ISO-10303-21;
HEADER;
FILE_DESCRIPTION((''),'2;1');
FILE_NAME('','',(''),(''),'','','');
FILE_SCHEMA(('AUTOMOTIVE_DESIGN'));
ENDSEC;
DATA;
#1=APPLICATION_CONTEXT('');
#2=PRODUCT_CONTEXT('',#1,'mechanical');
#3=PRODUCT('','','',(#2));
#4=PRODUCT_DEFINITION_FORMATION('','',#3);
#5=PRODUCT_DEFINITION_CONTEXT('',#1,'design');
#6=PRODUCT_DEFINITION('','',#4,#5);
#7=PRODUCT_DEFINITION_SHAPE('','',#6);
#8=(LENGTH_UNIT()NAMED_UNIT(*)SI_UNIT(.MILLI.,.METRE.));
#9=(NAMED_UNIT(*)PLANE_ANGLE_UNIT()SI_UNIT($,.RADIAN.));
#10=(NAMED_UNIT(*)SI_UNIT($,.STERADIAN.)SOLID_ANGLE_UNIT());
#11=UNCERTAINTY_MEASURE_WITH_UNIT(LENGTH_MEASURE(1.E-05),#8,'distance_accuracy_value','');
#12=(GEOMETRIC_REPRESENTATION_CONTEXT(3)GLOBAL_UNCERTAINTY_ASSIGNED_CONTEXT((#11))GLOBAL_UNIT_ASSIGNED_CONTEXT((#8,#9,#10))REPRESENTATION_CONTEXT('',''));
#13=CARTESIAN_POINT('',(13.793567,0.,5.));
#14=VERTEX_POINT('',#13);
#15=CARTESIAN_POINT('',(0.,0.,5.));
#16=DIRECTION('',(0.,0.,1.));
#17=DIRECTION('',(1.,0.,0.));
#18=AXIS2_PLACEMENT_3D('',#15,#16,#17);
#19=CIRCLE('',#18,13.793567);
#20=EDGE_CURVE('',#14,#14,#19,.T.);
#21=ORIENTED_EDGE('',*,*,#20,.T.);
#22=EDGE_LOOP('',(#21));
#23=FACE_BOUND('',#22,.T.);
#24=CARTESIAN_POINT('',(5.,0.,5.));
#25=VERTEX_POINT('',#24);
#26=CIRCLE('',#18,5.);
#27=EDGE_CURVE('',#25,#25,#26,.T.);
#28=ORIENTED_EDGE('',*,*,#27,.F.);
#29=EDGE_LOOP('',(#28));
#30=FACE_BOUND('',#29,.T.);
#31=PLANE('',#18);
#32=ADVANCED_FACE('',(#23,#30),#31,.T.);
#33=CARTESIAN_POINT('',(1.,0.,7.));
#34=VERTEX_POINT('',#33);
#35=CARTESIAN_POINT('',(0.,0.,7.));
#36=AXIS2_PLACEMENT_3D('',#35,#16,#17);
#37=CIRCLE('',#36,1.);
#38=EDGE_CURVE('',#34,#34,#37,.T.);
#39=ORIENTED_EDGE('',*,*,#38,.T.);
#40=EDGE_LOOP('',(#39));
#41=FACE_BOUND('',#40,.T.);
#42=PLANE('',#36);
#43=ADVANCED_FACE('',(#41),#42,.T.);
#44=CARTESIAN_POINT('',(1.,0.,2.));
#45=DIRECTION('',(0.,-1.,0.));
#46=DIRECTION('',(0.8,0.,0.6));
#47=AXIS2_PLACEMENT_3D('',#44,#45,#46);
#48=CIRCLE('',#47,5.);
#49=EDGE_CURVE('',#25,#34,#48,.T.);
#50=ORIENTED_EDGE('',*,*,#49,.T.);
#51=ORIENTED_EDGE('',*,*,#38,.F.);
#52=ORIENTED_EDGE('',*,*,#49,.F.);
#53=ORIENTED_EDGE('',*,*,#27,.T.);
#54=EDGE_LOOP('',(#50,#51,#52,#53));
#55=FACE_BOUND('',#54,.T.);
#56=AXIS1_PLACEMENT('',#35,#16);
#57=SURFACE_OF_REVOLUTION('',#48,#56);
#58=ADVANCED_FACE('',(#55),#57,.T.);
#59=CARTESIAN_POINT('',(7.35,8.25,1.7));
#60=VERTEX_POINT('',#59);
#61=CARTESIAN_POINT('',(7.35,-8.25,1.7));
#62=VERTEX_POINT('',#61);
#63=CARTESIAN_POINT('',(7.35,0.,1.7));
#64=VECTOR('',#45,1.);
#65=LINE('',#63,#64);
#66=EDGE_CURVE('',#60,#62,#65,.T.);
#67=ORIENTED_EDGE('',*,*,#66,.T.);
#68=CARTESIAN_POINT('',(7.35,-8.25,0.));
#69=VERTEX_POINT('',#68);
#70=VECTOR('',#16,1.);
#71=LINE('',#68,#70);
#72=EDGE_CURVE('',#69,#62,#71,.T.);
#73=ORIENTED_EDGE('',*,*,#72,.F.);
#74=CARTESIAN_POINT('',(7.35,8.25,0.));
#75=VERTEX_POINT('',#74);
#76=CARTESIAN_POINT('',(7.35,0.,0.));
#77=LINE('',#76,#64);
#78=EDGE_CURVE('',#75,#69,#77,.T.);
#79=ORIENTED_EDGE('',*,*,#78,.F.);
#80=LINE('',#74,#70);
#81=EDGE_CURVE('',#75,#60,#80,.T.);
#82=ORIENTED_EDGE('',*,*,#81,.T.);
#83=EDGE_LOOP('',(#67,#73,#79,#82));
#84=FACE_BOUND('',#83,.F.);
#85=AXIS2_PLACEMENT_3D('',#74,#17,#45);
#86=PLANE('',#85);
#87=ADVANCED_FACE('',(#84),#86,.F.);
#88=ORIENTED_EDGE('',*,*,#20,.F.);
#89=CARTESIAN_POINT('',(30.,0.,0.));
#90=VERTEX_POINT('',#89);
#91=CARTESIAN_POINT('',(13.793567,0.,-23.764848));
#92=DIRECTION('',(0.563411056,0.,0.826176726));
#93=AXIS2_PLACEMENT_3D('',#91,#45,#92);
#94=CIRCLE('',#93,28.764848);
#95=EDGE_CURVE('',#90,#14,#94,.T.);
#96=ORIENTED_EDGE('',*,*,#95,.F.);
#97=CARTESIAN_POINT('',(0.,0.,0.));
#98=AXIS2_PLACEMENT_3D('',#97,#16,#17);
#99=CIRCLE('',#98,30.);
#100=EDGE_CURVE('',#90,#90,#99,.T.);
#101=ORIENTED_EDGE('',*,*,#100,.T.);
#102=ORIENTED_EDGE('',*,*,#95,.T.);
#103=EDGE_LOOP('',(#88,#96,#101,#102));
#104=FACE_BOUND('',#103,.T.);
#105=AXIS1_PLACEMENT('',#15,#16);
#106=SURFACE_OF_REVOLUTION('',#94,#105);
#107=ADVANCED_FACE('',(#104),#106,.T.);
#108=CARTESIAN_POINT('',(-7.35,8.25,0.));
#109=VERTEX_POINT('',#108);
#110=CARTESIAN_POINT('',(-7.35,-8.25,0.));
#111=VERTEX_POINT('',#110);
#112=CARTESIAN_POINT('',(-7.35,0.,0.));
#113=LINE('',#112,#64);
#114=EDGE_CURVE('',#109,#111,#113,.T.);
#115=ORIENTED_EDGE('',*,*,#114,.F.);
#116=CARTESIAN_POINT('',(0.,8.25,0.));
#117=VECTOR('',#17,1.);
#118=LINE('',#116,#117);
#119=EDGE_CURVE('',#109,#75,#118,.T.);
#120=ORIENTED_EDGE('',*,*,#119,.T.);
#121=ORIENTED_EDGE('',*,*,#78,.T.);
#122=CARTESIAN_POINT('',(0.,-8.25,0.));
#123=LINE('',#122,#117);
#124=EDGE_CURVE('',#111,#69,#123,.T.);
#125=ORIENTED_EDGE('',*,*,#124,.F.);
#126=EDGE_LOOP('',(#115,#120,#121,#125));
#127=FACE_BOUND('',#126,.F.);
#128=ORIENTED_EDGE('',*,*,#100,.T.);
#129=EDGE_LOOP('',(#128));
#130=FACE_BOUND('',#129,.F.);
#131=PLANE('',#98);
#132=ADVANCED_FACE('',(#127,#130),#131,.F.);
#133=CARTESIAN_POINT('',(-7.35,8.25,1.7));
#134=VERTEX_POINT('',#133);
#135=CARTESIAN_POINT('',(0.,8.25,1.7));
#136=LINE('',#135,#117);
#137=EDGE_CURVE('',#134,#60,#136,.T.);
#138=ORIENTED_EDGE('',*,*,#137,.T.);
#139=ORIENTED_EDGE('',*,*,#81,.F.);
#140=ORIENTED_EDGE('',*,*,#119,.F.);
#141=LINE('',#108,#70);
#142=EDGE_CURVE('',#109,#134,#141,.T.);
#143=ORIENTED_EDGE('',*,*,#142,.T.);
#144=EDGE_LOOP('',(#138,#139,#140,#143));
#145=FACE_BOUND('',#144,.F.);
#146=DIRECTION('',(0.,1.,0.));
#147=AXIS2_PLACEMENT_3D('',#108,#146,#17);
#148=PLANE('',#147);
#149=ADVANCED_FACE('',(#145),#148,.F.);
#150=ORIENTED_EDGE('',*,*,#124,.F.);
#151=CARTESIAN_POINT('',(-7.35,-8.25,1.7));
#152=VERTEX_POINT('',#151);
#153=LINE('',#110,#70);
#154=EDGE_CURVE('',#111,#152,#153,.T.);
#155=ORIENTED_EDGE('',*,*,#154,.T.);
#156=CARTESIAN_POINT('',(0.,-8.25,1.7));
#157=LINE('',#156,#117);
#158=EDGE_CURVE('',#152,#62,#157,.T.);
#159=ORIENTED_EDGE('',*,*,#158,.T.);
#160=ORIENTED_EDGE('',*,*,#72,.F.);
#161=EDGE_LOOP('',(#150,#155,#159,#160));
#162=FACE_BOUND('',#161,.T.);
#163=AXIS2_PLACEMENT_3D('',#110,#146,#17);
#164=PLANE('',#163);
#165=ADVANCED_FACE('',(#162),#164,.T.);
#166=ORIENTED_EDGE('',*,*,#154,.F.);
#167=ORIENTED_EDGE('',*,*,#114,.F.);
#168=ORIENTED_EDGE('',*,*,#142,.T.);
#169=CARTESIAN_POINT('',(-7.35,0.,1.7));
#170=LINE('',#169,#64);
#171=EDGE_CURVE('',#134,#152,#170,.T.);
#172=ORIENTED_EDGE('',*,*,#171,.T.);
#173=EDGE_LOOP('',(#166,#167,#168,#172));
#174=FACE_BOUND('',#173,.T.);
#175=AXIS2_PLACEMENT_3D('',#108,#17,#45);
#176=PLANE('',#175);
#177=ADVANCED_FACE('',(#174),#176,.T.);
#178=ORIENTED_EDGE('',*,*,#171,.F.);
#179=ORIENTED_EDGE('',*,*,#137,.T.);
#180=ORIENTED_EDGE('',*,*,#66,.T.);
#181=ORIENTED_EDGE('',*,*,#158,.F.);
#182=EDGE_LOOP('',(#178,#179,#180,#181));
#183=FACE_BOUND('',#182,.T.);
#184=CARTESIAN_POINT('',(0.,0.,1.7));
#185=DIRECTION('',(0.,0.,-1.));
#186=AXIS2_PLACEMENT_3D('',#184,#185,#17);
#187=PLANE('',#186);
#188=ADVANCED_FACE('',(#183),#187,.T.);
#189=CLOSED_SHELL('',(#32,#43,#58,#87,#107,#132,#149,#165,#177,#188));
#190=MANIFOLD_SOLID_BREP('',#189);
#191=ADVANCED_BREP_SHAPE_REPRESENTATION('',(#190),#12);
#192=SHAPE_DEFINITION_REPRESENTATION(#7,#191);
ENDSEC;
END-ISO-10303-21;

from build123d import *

# Parameters (mm, degrees)
F0_R     = 30
F1_DEPTH = 5
F3_R     = 5
F4_DEPTH = 2
F5_W     = 14.7
F5_H     = 16.5
F6_DEPTH = 1.7


# Not quite as in the source:
# - a fillet or chamfer that OpenCascade refuses, or shapes differently, is made with other operations: its cross-section is extruded or revolved along the edge and cut away or added


with BuildPart() as f1:
    # F0 (on Top) → F1 (new body)
    with BuildSketch(Plane.XY):
        Circle(F0_R)
    extrude(amount=F1_DEPTH)

    # F2: fillet of radius 28.7648476108 on 1 edges, made by hand

    # F2_s1 → F2_t2 (revolve, cut)
    with BuildSketch(Plane.XZ):
        with BuildLine():
            ThreePointArc((30, 0), (22.2736681867, 3.7215915737), (13.7935668295, 5))
            Line((13.7935668295, 5), (30, 5))
            Line((30, 5), (30, 0))
        make_face()
    revolve(axis=Axis((0, 0, 5), (0, 0, 1)), mode=Mode.SUBTRACT)

    # F3 (on face) → F4 (join)
    with BuildSketch(Plane.XY.offset(5)):
        Circle(F3_R)
    extrude(amount=F4_DEPTH)

    # F5 (on face) → F6 (cut)
    with BuildSketch(Plane(origin=(0, 0, 0), x_dir=(1, 0, 0), z_dir=(0, 0, -1))):
        Rectangle(F5_W, F5_H)
    extrude(amount=-F6_DEPTH, mode=Mode.SUBTRACT)

    # F7: fillet of radius 5 on 1 edges, made by hand

    # F7_s1 → F7_t2 (revolve, cut)
    with BuildSketch(Plane.XZ):
        with BuildLine():
            ThreePointArc((5, 5), (3.2360679775, 6.472135955), (1, 7))
            Line((1, 7), (5, 7))
            Line((5, 7), (5, 5))
        make_face()
    revolve(axis=Axis((0, 0, 7), (0, 0, 1)), mode=Mode.SUBTRACT)


solid = f1.part
